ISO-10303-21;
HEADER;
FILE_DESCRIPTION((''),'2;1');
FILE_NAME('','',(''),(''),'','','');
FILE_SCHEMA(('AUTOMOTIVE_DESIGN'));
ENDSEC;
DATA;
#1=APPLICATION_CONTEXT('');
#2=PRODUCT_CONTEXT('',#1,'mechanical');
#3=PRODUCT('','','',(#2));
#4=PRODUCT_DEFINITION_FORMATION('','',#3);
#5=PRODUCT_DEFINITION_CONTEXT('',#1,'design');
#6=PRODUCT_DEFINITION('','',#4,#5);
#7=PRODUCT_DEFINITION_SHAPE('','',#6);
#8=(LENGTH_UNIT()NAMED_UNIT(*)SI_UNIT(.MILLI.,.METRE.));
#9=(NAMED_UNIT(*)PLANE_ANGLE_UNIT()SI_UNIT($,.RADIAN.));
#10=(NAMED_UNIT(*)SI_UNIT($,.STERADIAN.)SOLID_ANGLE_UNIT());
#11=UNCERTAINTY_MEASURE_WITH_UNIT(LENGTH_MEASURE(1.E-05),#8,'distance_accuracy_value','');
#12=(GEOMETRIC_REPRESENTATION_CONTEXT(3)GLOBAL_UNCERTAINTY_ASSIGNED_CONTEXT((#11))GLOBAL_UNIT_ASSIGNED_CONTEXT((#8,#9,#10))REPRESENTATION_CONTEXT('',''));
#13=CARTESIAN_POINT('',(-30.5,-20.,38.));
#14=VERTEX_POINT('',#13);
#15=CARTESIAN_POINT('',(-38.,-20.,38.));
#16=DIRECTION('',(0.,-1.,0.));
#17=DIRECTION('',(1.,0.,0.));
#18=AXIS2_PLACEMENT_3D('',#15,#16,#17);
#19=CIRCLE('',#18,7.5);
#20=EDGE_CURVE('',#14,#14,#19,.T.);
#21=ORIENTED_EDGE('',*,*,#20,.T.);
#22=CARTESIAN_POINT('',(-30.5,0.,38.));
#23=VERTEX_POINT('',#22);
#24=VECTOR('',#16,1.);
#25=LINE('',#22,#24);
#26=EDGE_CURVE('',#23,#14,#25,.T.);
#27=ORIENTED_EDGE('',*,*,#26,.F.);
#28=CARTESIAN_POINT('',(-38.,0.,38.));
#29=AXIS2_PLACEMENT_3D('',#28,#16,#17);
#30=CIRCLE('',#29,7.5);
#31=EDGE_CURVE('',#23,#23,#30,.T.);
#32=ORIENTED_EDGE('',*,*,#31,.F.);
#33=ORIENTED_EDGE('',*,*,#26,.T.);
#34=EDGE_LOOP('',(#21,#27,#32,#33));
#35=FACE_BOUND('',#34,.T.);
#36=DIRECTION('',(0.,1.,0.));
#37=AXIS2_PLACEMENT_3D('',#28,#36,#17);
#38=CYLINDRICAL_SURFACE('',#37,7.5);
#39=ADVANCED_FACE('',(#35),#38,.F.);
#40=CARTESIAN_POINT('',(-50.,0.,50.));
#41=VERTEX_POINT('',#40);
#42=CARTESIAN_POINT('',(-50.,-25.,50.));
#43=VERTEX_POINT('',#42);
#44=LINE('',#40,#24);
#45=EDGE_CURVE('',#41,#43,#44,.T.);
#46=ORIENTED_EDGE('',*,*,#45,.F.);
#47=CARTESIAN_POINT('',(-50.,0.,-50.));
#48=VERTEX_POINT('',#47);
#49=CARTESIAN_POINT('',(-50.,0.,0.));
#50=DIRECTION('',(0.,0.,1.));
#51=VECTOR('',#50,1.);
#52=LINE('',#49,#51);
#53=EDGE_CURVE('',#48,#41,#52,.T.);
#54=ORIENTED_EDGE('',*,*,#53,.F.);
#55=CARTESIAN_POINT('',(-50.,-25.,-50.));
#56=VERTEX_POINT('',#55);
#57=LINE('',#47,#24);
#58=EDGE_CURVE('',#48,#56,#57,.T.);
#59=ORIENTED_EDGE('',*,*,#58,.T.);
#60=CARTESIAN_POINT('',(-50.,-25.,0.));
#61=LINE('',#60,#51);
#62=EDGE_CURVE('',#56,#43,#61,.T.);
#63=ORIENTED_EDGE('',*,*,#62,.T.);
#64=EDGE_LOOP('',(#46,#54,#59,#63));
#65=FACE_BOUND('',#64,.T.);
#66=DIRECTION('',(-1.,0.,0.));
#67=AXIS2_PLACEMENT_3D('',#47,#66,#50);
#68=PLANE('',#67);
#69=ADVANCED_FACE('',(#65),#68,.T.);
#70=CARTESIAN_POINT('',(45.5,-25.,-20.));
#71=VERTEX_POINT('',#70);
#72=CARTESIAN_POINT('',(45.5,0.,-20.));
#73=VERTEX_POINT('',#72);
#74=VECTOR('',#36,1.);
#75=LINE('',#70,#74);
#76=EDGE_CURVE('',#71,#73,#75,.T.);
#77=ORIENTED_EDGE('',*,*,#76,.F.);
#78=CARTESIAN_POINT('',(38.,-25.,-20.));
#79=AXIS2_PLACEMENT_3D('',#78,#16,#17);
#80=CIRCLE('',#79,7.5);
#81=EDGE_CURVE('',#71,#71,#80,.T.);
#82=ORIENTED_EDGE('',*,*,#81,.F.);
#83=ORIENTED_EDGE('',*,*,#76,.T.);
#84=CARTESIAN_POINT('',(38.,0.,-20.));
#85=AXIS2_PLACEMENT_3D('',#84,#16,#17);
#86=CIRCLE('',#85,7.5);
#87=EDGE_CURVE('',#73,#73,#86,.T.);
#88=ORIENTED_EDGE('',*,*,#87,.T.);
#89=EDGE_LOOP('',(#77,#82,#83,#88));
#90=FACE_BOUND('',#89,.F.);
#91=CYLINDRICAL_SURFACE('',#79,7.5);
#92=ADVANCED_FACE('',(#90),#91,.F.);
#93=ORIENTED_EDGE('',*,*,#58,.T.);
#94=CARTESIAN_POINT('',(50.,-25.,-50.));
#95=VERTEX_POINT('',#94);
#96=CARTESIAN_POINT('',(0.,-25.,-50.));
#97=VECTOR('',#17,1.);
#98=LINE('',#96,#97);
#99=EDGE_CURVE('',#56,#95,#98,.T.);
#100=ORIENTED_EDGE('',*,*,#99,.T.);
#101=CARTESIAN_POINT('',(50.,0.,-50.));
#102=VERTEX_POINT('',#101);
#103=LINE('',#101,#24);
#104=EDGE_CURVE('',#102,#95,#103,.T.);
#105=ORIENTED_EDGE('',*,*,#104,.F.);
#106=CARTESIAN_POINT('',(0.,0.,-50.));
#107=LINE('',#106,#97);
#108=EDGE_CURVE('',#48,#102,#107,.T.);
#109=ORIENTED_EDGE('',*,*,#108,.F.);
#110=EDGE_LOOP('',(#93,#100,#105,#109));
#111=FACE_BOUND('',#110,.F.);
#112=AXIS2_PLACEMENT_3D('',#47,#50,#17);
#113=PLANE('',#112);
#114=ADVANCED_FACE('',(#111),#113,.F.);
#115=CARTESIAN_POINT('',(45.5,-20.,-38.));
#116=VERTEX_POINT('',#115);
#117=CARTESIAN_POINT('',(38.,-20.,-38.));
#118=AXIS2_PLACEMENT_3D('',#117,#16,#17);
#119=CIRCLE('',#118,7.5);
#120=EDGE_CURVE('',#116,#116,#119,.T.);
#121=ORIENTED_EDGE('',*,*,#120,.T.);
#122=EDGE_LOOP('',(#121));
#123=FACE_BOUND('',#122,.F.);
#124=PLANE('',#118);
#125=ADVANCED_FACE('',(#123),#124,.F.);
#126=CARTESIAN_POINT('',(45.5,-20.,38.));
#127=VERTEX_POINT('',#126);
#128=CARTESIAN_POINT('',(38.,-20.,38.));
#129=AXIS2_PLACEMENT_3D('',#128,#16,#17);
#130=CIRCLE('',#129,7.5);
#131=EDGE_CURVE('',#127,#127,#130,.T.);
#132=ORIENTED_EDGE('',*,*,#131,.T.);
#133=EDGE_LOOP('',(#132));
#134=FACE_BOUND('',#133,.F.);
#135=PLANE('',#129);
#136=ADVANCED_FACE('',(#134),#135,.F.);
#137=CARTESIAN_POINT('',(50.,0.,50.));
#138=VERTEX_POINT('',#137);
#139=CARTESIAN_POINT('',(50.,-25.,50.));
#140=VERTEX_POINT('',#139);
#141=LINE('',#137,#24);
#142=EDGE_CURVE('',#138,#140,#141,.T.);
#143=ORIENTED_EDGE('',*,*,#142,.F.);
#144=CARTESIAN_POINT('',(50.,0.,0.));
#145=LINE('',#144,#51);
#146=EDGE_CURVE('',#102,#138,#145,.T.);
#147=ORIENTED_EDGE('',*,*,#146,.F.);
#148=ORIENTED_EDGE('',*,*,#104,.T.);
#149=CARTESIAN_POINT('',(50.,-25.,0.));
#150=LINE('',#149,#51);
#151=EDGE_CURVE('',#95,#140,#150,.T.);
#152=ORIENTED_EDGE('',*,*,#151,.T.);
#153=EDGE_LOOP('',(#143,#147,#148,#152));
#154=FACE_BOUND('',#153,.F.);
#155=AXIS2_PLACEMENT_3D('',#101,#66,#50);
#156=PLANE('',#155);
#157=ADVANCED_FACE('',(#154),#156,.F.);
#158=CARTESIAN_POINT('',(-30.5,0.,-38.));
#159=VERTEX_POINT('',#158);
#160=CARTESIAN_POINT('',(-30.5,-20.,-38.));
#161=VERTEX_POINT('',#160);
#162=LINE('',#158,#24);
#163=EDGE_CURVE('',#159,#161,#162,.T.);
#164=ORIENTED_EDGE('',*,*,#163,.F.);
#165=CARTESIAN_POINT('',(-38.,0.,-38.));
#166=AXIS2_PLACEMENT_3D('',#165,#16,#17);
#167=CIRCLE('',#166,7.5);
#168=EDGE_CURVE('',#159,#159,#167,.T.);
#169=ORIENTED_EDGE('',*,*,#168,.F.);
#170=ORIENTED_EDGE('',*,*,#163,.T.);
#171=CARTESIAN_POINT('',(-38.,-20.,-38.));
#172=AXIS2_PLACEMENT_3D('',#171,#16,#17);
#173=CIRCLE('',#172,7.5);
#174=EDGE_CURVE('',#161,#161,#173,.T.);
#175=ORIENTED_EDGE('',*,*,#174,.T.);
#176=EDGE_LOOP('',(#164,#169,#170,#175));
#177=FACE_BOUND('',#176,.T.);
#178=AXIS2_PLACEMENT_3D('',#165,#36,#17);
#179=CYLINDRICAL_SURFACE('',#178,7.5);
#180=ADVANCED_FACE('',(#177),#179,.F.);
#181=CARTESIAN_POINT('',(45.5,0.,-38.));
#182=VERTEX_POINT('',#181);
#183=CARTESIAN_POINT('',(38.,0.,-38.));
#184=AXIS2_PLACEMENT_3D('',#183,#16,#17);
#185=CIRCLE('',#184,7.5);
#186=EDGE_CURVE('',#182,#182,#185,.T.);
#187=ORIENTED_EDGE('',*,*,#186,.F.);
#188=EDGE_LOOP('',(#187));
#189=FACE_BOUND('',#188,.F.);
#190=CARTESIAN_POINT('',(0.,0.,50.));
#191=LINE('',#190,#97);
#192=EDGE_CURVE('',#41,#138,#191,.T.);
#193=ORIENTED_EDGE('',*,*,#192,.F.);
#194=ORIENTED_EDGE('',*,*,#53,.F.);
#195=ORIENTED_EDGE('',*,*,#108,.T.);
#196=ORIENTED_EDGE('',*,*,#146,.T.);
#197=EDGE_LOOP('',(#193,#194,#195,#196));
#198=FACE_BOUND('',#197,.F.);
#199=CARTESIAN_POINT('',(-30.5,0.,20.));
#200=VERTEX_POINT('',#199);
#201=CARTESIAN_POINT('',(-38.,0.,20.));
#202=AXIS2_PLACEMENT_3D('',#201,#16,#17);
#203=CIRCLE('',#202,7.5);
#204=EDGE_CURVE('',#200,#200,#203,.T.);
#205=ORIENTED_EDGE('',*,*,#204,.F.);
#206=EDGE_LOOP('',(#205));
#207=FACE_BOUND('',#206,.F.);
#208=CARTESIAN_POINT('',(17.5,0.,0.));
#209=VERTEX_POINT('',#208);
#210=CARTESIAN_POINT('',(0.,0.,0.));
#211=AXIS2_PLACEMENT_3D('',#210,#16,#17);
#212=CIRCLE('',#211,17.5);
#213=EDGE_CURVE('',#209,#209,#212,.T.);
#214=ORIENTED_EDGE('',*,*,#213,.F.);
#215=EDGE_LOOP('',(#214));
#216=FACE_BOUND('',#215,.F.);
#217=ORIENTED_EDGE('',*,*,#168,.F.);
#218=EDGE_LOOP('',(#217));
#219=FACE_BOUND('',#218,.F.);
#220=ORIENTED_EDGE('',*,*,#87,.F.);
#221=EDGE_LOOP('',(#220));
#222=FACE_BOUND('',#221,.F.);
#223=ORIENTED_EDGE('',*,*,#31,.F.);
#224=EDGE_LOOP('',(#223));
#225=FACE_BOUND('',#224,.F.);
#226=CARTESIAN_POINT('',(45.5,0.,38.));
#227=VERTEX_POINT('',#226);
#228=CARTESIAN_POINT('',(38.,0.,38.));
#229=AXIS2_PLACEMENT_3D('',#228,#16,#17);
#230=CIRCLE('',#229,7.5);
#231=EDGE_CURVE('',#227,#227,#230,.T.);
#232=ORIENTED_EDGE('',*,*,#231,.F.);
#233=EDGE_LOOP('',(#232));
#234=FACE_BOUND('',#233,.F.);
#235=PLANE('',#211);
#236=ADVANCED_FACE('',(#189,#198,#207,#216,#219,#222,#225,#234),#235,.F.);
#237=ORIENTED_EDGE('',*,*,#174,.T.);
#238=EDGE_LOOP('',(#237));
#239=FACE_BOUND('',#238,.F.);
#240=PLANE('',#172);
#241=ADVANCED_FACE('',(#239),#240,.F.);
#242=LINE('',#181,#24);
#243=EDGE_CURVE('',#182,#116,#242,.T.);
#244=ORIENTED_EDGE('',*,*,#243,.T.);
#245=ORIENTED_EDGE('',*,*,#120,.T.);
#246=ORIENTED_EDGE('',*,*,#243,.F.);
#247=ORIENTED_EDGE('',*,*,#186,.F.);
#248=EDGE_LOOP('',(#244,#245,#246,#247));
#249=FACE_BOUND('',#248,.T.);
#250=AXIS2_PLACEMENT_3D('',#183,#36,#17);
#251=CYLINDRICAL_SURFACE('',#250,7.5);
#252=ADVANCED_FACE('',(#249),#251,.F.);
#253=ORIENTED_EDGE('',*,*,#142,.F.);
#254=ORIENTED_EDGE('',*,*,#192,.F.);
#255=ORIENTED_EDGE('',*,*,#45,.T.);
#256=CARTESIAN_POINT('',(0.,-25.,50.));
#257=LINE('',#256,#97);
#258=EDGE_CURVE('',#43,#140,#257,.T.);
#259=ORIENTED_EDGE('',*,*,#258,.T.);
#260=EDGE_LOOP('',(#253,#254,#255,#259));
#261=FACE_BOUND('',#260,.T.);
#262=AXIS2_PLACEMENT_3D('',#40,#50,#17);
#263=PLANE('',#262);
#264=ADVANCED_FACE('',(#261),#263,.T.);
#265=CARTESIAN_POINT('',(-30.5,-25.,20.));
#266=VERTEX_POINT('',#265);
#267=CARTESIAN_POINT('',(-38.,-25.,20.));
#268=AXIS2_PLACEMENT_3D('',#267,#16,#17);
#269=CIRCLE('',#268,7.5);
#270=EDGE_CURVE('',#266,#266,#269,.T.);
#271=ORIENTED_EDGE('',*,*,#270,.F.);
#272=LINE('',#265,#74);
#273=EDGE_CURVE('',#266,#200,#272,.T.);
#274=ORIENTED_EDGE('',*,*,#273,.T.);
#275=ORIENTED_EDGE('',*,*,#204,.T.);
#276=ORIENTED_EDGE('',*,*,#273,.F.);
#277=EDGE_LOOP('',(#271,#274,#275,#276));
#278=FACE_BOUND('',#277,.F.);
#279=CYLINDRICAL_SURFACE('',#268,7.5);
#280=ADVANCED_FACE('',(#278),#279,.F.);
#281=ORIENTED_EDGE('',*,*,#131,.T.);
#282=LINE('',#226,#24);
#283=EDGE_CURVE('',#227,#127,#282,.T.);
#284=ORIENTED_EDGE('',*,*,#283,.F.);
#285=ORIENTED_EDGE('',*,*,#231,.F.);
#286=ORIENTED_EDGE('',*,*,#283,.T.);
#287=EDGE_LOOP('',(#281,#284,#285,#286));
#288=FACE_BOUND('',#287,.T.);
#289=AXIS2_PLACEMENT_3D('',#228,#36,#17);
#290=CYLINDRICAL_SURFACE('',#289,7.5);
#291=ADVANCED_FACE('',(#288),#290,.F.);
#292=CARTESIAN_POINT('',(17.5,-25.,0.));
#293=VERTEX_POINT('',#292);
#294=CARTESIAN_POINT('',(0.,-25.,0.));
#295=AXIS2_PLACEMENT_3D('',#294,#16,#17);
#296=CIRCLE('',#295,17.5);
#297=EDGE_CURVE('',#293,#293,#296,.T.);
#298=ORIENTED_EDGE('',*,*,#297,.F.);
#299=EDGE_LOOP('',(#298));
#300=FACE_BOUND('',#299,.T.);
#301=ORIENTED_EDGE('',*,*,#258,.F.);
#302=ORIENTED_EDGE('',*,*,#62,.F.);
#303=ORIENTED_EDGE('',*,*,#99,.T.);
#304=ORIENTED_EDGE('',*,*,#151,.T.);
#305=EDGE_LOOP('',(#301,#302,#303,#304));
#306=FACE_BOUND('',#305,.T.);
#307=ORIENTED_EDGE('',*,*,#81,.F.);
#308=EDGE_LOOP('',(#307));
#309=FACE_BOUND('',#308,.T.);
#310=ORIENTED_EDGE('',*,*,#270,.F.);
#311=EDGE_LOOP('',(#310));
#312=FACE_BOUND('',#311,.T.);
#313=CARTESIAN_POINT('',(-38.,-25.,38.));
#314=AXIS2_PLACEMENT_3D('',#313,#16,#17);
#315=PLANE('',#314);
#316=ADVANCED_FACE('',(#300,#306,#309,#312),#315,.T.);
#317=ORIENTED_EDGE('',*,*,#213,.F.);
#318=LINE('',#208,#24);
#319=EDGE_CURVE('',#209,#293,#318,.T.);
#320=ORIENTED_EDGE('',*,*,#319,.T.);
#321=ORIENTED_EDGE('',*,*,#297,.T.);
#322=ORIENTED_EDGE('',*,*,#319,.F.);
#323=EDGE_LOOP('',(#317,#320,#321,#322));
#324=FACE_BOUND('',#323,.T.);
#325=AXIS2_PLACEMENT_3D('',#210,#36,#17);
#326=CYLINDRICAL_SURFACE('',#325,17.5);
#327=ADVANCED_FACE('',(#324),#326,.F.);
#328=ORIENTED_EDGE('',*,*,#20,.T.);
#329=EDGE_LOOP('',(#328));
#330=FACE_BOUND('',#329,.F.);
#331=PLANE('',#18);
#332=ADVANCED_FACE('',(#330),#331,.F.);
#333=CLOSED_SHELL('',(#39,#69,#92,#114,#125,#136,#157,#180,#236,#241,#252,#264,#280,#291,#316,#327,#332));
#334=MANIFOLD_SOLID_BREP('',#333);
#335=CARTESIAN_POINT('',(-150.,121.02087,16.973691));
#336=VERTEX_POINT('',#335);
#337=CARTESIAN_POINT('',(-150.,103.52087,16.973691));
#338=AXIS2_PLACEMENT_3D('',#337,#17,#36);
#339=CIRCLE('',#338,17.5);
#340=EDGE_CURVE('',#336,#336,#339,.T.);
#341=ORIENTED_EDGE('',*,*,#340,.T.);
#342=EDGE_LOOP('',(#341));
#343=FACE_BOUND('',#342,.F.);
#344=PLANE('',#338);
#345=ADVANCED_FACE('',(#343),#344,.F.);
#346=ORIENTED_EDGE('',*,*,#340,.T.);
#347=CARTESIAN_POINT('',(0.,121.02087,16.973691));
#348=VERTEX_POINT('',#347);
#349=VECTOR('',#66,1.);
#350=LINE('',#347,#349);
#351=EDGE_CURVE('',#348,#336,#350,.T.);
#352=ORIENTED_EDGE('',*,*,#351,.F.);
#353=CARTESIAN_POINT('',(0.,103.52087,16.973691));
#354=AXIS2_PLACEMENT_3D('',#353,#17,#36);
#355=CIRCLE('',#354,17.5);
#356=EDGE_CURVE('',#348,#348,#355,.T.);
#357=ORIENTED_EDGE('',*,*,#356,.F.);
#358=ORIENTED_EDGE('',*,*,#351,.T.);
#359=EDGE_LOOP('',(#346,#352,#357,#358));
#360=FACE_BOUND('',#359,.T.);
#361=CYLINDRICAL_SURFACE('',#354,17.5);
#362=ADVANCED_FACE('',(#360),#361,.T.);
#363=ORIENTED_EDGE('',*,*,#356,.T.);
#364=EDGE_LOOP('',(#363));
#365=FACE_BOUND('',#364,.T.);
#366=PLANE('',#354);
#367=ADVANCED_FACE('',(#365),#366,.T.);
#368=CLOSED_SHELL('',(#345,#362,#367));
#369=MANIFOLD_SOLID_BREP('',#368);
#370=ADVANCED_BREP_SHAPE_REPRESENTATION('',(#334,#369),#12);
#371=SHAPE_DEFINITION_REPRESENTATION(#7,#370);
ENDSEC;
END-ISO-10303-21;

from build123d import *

# Parameters (mm, degrees)
F0_W     = 100
F0_H     = 100
F0_R     = 7.5
F0_R_2   = 17.5
F1_DEPTH = 25
F2_R     = 17.5
F3_DEPTH = 150
F4_R     = 7.5
F5_DEPTH = 5
F6_R     = 7.5
F7_DEPTH = 146.0218702087


with BuildPart() as f1:
    # F0 (on Front) → F1 (new body)
    with BuildSketch(Plane.XZ):
        Rectangle(F0_W, F0_H)
        with Locations((-38, -38)):
            Circle(F0_R, mode=Mode.SUBTRACT)
        with Locations((38, -38)):
            Circle(F0_R, mode=Mode.SUBTRACT)
        with Locations((-38, 38)):
            Circle(F0_R, mode=Mode.SUBTRACT)
        Circle(F0_R_2, mode=Mode.SUBTRACT)
        with Locations((38, 38)):
            Circle(F0_R, mode=Mode.SUBTRACT)
    extrude(amount=F1_DEPTH)

    # F4 (on face) → F5 (join)
    with BuildSketch(Plane.XZ.offset(25)):
        with Locations((-38, 38)):
            Circle(F4_R)
        with Locations((38, 38)):
            Circle(F4_R)
        with Locations((38, -38)):
            Circle(F4_R)
        with Locations((-38, -38)):
            Circle(F4_R)
    extrude(amount=-F5_DEPTH)

    # F6 (on face) → F7 (cut, through all)
    with BuildSketch(Plane.XZ.offset(25)):
        with Locations((-38, 20)):
            Circle(F6_R)
        with Locations((38, -20)):
            Circle(F6_R)
    extrude(amount=-F7_DEPTH, mode=Mode.SUBTRACT)


with BuildPart() as f3:
    # F2 (on Right) → F3 (new body)
    with BuildSketch(Plane.YZ):
        with Locations((103.5208702087, 16.9736910611)):
            Circle(F2_R)
    extrude(amount=-F3_DEPTH)


solid = Compound([f1.part, f3.part])
